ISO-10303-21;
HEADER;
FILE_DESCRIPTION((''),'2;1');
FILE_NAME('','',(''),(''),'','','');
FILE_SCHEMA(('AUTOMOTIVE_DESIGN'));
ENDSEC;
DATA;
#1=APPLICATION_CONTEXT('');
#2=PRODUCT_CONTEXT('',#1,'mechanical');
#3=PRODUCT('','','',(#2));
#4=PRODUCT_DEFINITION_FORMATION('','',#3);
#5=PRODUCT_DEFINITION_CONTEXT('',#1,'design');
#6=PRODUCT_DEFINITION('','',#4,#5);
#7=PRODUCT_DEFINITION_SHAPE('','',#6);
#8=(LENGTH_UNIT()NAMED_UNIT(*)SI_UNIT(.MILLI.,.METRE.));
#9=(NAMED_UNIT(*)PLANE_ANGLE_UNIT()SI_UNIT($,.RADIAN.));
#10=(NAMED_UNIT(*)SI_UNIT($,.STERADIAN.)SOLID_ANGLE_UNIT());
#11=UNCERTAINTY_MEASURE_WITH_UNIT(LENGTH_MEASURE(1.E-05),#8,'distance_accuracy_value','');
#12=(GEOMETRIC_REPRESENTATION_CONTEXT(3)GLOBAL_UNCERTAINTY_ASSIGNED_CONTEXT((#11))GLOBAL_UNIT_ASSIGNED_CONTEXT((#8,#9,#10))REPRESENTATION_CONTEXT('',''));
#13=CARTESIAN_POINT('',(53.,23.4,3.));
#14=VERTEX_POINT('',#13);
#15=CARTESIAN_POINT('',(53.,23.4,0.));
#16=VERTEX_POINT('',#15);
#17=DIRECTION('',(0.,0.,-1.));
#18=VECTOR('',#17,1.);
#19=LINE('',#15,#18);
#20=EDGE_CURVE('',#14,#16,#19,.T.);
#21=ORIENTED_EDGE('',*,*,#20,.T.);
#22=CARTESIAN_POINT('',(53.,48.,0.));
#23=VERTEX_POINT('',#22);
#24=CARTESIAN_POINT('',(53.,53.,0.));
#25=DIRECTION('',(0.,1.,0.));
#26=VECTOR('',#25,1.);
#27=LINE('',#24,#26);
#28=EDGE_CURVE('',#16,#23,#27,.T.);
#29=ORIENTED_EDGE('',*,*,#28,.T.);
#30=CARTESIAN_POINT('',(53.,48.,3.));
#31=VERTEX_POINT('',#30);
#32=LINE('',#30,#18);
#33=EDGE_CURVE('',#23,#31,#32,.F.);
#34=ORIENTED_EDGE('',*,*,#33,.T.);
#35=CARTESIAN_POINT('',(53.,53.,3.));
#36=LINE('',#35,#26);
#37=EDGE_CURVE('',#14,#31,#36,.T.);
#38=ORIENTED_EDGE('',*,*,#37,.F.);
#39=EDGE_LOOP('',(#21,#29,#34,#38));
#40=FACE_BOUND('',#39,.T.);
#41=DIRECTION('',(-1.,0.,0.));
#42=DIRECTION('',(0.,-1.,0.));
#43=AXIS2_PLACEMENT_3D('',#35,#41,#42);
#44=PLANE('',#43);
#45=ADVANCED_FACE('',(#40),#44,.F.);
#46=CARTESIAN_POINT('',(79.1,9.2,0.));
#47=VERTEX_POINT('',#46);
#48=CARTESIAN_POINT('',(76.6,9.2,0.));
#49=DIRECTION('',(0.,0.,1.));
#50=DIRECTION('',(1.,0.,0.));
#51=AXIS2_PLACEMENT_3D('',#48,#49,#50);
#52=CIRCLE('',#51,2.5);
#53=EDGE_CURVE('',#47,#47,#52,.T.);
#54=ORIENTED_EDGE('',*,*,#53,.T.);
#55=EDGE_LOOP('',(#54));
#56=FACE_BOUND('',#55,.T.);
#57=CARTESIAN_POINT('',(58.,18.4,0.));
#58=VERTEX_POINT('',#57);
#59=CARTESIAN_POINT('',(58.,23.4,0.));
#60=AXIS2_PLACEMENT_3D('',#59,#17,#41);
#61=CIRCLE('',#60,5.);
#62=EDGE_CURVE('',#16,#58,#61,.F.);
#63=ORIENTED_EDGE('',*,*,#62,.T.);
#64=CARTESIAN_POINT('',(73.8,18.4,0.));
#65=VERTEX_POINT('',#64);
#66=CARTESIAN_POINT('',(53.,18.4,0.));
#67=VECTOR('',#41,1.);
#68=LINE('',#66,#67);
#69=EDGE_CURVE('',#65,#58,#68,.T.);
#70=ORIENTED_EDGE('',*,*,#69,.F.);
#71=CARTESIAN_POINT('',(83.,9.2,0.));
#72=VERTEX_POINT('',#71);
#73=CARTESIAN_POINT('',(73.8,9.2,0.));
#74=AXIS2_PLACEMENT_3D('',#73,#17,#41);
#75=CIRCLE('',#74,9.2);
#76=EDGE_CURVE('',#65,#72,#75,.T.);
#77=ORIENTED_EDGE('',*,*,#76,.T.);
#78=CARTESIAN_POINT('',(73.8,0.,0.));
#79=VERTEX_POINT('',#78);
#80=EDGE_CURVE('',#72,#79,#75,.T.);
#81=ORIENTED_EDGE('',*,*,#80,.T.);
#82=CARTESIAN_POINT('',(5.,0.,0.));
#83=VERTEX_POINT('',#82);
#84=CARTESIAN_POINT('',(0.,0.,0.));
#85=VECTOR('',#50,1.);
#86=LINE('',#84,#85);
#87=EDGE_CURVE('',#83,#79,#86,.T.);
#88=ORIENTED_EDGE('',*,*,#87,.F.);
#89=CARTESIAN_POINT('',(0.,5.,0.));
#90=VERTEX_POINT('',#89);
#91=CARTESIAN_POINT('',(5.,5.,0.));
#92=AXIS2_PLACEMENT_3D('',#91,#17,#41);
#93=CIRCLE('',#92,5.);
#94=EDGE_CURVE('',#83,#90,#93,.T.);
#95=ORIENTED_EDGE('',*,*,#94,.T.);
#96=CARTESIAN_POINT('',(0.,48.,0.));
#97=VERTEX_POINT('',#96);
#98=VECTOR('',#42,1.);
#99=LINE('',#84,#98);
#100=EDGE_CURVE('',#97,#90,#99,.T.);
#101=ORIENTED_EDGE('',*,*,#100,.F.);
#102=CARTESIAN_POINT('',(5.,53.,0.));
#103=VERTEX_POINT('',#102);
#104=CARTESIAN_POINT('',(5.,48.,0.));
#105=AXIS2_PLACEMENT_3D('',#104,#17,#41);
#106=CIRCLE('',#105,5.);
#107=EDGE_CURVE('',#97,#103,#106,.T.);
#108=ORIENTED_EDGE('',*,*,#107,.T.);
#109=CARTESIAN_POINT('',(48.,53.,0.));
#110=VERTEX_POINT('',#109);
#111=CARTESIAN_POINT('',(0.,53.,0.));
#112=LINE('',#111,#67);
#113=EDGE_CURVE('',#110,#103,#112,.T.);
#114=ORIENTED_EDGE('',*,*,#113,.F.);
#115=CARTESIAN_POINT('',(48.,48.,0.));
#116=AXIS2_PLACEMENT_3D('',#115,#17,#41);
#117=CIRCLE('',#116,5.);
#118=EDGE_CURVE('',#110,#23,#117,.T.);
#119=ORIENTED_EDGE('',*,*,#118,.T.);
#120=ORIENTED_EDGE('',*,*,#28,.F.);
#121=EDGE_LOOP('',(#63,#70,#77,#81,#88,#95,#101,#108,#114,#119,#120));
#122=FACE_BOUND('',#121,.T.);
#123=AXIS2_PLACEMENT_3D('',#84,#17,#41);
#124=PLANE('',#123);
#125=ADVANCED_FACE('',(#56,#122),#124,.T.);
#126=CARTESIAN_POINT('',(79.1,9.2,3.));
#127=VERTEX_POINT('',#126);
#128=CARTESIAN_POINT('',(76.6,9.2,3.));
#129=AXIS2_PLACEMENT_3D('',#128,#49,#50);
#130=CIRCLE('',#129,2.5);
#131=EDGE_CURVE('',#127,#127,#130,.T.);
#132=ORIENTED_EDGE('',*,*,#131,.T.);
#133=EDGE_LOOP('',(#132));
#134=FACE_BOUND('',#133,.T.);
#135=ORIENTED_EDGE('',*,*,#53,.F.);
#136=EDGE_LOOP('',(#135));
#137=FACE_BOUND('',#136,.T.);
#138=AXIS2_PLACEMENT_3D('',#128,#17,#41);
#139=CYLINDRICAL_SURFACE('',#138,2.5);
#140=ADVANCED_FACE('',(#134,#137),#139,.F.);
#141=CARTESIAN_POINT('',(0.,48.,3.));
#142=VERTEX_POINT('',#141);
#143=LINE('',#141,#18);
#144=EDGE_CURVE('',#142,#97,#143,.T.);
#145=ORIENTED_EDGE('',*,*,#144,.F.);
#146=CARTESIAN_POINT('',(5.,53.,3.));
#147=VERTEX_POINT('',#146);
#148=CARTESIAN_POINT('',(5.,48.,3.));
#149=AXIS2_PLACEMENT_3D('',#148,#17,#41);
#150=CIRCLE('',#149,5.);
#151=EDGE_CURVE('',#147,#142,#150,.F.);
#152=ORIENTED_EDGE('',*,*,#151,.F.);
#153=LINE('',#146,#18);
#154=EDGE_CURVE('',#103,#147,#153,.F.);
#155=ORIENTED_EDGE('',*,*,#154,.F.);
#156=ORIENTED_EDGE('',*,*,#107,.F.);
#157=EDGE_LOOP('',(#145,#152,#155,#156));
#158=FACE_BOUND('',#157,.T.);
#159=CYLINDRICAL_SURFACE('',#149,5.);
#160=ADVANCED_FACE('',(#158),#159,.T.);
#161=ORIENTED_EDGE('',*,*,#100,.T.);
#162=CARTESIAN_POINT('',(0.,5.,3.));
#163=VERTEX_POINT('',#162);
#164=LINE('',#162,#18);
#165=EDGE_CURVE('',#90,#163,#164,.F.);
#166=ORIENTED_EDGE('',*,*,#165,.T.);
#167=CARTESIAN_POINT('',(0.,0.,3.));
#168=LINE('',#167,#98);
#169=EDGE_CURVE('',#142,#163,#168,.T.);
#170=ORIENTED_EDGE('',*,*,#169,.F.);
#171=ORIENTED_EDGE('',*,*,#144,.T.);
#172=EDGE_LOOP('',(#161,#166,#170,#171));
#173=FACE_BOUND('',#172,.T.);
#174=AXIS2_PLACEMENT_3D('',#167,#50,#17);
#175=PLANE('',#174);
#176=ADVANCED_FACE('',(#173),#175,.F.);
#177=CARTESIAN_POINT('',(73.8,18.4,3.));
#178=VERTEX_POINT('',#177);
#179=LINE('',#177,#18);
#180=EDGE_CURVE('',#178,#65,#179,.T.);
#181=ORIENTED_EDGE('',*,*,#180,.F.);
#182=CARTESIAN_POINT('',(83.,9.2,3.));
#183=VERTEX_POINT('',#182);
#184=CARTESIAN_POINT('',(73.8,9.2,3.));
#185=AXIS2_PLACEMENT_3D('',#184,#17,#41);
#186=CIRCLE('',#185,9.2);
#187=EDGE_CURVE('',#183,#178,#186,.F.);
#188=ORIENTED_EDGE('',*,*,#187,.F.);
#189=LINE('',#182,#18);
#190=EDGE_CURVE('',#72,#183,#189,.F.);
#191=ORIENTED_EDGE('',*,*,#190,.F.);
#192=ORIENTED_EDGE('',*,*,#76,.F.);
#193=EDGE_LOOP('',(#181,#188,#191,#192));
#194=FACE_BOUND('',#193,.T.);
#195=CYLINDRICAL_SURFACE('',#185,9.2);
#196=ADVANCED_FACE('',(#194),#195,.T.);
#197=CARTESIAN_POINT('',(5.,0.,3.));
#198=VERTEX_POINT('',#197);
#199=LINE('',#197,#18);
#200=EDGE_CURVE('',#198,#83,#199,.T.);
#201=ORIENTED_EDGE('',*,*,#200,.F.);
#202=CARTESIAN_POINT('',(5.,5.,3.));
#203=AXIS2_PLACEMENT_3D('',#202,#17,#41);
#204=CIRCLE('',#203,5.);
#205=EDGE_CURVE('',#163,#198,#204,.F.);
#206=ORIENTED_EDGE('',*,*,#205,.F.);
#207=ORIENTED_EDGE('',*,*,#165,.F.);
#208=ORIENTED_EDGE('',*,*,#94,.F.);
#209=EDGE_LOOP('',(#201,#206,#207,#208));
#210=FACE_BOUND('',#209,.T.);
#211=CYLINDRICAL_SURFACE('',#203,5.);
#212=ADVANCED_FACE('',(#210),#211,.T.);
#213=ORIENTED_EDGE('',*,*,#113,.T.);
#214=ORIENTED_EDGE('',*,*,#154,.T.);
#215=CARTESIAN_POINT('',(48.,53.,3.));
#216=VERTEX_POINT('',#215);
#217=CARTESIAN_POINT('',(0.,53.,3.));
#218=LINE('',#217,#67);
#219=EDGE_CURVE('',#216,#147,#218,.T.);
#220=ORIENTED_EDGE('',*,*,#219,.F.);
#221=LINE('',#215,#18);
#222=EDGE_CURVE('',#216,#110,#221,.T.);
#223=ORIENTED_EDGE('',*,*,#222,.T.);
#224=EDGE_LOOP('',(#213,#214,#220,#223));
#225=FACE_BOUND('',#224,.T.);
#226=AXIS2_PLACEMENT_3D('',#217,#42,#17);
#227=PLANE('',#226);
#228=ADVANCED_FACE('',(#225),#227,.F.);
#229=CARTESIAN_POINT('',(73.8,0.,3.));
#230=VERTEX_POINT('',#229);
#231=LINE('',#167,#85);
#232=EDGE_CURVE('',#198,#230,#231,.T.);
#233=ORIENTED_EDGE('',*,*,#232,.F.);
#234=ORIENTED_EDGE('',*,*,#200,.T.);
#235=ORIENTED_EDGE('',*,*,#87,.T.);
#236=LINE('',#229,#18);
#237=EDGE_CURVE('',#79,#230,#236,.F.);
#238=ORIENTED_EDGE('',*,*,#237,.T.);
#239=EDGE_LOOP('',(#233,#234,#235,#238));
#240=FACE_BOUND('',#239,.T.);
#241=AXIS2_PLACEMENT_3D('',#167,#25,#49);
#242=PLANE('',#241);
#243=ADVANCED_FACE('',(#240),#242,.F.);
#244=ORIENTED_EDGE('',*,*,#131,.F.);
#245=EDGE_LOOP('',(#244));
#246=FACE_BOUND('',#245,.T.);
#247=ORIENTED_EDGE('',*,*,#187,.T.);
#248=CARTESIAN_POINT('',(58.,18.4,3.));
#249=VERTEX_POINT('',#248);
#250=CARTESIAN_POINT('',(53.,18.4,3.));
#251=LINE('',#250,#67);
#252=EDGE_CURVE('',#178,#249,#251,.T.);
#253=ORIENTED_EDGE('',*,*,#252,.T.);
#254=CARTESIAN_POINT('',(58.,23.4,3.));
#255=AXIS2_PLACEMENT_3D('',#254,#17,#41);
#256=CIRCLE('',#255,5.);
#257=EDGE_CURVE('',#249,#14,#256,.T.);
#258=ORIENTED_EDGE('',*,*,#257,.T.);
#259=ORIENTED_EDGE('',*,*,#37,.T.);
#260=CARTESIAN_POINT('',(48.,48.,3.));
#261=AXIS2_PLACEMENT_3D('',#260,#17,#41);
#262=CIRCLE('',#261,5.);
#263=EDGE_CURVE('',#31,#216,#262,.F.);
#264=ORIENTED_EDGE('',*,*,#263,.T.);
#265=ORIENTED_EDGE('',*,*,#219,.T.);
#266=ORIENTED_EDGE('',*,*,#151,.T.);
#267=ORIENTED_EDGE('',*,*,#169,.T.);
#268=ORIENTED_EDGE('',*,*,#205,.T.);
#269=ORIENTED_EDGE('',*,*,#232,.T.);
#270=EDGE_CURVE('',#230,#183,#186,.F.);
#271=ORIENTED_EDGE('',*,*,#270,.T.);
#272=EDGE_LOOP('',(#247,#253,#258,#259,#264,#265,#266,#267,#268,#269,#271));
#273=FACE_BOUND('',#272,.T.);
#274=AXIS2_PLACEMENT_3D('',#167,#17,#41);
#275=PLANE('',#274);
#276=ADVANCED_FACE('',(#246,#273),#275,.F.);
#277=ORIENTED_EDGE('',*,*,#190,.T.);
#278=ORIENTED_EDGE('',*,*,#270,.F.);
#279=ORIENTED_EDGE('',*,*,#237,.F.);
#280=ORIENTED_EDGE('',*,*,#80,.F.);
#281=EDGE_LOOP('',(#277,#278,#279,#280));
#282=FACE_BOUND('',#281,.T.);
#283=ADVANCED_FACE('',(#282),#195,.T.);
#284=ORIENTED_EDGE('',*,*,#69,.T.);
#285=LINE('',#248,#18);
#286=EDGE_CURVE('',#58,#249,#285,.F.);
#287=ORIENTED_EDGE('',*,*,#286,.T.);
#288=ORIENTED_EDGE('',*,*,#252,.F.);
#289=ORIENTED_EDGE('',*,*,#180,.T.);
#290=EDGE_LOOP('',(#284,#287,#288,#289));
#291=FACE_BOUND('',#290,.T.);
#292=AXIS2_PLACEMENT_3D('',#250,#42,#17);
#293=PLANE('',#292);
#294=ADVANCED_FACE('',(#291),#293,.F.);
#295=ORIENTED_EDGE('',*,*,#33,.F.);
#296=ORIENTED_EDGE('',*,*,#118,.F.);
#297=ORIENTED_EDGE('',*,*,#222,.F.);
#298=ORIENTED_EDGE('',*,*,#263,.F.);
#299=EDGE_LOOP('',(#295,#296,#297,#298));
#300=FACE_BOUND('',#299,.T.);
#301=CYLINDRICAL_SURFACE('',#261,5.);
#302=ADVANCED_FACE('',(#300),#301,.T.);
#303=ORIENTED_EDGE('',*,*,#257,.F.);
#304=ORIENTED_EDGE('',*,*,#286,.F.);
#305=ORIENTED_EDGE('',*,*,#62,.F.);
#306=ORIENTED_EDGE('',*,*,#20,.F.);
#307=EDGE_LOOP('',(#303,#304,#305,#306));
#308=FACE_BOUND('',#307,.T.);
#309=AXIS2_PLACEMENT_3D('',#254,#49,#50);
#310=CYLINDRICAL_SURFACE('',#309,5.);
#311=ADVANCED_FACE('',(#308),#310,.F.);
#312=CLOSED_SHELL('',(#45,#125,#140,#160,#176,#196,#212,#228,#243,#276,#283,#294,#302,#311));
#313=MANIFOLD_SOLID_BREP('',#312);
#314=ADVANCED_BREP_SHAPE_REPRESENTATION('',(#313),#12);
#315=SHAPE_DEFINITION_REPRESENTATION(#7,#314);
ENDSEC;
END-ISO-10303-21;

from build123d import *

# Parameters (mm, degrees)
SKETCH1_R           = 2.5
BOSS_EXTRUDE1_DEPTH = 3
FILLET1_R           = 5
FILLET2_R           = 5
FILLET4_R           = 9.2


with BuildPart() as part:
    # Sketch1 → Boss-Extrude1 (new body)
    with BuildSketch(Plane.XY):
        Polygon((53, 53), (53, 18.4), (83, 18.4), (83, 0), (0, 0), (0, 53), align=None)
        with Locations((76.6, 9.2)):
            Circle(SKETCH1_R, mode=Mode.SUBTRACT)
    extrude(amount=BOSS_EXTRUDE1_DEPTH)

    # Fillet1
    fillet1_edges = [part.edges().sort_by_distance(p)[0] for p in [
        (0, 53, 1.5),
        (53, 53, 1.5),
        (0, 0, 1.5),
    ]]
    fillet(fillet1_edges, radius=FILLET1_R)

    # Fillet2
    fillet2_edges = [part.edges().sort_by_distance(p)[0] for p in [
        (53, 18.4, 1.5),
    ]]
    fillet(fillet2_edges, radius=FILLET2_R)

    # Fillet4
    fillet4_edges = [part.edges().sort_by_distance(p)[0] for p in [
        (83, 0, 1.5),
        (83, 18.4, 1.5),
    ]]
    fillet(fillet4_edges, radius=FILLET4_R - 0.0001)  # a hair under: the kernel refuses the full size


solid = part.part
